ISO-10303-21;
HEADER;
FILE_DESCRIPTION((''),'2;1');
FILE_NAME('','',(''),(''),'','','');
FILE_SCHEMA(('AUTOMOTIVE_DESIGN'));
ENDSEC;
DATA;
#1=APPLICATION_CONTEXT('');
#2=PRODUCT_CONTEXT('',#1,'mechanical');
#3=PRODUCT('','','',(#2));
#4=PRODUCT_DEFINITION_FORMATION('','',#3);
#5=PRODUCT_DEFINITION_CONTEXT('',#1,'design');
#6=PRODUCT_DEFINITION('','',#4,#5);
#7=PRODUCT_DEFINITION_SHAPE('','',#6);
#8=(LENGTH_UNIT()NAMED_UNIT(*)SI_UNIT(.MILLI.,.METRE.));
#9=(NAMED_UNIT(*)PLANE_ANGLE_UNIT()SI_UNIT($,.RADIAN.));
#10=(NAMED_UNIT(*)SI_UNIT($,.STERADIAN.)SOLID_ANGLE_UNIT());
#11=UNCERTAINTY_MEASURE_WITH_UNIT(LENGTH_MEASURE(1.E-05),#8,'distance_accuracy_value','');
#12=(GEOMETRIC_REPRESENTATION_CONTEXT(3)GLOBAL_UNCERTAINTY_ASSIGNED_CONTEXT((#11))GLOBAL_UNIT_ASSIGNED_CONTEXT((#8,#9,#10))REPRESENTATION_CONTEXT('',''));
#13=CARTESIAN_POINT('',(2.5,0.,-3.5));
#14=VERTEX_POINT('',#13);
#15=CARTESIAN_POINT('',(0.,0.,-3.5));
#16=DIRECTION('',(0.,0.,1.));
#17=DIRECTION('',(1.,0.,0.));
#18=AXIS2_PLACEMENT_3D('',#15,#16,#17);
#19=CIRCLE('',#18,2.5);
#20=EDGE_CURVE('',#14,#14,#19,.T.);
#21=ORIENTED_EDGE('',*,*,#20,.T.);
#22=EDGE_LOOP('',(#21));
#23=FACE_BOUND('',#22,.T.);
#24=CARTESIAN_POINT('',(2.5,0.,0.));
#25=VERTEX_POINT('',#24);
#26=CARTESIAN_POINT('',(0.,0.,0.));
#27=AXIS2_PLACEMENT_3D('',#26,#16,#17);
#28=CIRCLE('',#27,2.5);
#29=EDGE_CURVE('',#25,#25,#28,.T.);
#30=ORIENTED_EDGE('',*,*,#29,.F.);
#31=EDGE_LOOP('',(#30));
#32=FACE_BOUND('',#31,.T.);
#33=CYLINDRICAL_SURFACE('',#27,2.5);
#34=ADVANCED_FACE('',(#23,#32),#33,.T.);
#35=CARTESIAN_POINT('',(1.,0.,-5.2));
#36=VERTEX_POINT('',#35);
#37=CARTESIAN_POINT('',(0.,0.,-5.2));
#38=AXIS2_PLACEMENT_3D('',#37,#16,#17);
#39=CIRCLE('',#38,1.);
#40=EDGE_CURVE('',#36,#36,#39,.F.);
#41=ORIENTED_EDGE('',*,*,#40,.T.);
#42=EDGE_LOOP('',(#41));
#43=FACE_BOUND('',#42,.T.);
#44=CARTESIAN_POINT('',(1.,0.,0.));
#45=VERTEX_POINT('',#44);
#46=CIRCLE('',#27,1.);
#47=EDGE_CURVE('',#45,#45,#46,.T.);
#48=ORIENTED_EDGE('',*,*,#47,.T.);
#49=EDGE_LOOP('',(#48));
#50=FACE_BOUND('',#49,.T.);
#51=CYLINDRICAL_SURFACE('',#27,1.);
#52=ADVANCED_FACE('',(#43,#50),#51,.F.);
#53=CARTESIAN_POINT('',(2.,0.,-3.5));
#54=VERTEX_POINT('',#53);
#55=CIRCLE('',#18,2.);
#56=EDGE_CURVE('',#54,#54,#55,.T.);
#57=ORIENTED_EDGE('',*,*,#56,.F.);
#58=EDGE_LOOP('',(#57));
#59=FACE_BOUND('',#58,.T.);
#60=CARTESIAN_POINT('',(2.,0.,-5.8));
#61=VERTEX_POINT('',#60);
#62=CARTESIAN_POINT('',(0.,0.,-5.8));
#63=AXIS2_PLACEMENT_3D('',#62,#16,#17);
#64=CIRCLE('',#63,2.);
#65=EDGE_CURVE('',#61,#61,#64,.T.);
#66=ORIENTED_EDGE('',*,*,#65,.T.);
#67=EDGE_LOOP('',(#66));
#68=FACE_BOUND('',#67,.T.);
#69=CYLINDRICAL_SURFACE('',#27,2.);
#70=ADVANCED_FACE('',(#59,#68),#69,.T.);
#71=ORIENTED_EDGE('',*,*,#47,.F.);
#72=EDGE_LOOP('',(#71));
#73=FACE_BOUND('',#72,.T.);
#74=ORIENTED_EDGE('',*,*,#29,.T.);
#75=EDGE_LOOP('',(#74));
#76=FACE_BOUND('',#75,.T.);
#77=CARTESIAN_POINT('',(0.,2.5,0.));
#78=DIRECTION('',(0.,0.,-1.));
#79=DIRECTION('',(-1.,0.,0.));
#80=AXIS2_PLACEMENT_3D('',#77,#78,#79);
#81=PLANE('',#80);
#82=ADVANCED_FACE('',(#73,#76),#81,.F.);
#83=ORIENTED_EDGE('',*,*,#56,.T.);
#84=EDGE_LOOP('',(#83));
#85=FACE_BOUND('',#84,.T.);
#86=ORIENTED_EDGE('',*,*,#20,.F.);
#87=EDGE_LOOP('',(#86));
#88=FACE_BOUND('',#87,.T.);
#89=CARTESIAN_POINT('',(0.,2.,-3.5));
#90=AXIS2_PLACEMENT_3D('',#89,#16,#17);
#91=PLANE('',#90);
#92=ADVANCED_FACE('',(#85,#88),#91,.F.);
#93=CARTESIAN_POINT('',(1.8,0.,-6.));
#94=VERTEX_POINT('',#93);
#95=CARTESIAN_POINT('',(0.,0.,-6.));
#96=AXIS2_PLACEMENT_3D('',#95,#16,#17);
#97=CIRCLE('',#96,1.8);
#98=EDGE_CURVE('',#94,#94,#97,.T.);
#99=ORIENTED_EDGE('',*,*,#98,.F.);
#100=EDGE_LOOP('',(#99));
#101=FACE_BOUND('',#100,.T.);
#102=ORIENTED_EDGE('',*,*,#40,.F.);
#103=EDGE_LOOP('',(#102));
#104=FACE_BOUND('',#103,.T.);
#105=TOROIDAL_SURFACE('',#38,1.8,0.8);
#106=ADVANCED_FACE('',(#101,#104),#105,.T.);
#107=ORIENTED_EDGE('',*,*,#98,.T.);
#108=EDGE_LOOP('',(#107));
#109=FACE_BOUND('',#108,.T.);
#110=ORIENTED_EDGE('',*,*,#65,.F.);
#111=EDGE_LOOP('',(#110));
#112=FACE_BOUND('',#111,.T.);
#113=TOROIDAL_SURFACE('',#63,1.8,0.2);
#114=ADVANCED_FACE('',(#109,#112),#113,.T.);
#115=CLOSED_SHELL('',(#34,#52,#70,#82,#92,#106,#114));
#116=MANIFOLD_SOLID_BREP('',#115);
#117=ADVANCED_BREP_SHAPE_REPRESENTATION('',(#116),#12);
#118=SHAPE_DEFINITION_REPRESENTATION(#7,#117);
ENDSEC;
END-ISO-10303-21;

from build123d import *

# Parameters (mm, degrees)
VERRUNDUNG1_R = 0.8
VERRUNDUNG2_R = 0.2


with BuildPart() as part:
    # Skizze1 → Rotation1 (revolve)
    with BuildSketch(Plane(origin=(0, 0, 0), x_dir=(0, 0, -1), z_dir=(1, 0, 0)), mode=Mode.PRIVATE) as rotation1_sk:
        Polygon((0, 2.5), (0, 1), (6, 1), (6, 2), (3.5, 2), (3.5, 2.5), align=None)
    revolve(rotation1_sk.sketch.rotate(Axis((0, 0, 0), (0, 0, -1)), 90), axis=Axis((0, 0, 0), (0, 0, -1)))

    # Verrundung1
    verrundung1_edges = [part.edges().sort_by_distance(p)[0] for p in [
        (-1, 0, -6),
    ]]
    fillet(verrundung1_edges, radius=VERRUNDUNG1_R)

    # Verrundung2
    verrundung2_edges = [part.edges().sort_by_distance(p)[0] for p in [
        (-2, 0, -6),
    ]]
    fillet(verrundung2_edges, radius=VERRUNDUNG2_R - 0.0001)  # a hair under: the kernel refuses the full size


solid = part.part
